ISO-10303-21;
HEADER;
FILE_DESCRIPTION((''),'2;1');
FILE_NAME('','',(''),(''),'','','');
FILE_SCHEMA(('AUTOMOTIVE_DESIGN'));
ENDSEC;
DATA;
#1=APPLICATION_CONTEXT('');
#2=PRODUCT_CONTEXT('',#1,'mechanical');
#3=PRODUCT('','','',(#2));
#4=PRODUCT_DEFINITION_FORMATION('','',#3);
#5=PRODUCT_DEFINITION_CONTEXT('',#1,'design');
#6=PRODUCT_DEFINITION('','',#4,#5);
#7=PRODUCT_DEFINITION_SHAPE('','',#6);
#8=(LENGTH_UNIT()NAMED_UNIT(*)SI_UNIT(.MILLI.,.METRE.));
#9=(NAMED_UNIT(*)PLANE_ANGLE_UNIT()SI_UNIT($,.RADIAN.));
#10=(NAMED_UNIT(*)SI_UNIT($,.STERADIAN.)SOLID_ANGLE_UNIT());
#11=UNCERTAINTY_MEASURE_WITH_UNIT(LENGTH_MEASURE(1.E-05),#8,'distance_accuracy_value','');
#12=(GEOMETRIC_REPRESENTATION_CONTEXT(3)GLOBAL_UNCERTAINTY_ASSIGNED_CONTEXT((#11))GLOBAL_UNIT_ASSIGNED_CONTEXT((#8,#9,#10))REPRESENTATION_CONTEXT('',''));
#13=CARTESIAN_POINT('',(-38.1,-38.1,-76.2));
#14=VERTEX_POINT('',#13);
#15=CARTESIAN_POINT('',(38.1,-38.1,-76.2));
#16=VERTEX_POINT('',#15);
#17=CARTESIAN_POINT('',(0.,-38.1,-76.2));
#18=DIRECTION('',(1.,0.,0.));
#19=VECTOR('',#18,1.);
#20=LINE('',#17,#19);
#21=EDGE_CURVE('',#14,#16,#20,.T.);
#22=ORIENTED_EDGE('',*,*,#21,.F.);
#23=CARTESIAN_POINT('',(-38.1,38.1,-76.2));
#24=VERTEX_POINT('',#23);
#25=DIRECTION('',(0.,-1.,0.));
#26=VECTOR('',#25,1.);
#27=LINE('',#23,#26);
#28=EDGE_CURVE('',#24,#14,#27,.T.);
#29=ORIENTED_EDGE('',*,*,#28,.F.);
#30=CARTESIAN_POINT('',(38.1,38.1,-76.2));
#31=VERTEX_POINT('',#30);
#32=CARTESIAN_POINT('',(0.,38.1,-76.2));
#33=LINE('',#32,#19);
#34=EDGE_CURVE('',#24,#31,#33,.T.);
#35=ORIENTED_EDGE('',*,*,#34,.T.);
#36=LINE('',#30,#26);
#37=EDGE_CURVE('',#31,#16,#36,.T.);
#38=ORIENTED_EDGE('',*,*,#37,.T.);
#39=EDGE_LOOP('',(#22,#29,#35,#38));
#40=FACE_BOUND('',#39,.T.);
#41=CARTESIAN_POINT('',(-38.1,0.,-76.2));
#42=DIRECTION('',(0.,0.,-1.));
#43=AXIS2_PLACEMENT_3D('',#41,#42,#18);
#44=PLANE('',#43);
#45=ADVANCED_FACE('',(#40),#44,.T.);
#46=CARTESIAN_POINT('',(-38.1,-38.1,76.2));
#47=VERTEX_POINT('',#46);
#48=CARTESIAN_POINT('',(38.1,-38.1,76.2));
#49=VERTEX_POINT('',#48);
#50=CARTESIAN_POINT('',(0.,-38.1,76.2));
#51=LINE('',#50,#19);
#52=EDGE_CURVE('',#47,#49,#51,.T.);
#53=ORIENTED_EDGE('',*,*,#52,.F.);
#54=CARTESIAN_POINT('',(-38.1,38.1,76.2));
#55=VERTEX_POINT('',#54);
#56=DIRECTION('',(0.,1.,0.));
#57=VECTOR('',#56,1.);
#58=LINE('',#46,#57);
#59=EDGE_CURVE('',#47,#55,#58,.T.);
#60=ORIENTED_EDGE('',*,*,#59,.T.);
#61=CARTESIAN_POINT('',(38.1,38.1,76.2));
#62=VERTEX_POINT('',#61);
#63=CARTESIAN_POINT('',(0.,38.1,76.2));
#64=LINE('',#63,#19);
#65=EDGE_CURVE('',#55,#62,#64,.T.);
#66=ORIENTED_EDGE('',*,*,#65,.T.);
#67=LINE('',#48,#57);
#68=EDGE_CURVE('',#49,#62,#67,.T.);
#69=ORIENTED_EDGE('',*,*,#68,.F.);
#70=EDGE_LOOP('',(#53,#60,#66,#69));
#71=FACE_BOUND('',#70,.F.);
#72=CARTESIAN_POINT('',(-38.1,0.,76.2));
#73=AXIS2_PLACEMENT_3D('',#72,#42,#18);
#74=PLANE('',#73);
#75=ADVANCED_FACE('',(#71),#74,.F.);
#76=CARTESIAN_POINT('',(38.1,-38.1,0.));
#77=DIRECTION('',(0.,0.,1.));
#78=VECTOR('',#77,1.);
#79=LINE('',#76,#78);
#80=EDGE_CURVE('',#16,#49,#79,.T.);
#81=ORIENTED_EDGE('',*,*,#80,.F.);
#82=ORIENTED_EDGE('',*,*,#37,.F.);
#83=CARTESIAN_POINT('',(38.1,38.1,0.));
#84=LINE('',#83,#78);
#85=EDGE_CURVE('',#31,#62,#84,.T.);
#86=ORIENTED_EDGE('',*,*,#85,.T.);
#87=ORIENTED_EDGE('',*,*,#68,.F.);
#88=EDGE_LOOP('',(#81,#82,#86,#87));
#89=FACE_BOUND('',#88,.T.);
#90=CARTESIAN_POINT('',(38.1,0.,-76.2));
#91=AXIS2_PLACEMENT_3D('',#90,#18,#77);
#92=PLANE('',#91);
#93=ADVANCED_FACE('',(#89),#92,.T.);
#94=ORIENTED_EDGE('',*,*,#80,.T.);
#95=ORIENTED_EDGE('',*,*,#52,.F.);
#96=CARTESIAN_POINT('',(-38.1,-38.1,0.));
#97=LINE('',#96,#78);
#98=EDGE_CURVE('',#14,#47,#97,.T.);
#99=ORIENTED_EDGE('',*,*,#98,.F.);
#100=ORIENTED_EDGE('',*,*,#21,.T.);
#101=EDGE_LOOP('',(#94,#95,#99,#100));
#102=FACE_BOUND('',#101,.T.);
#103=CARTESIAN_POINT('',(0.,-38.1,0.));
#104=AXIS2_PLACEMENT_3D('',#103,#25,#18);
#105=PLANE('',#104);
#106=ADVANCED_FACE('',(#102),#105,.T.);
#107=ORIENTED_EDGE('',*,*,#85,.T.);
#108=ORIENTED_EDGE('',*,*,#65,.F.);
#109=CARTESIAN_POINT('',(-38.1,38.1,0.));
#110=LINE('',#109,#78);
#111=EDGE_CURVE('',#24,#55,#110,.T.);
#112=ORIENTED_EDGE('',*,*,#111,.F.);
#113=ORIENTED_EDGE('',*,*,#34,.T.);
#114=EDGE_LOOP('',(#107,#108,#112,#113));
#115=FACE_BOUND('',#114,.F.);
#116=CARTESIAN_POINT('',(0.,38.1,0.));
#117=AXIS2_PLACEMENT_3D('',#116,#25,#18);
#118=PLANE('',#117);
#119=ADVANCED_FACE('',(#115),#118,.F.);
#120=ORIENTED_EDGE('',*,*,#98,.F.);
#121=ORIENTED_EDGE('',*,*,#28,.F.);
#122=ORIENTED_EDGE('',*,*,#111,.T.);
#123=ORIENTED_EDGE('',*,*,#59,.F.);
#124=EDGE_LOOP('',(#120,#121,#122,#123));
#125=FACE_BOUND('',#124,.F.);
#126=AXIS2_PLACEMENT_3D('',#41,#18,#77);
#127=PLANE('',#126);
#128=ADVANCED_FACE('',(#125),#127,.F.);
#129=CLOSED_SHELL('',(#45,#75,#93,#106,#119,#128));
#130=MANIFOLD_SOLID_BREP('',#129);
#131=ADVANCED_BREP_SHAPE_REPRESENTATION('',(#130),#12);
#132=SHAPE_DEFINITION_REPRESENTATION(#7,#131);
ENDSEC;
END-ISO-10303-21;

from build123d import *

# Parameters (mm, degrees)
F1_W     = 76.2
F1_H     = 152.4
F2_DEPTH = 38.1


# Not quite as in the source:
# - a variable given as a bare number and used for a length is read in inches; the dataset says mm whatever the document's units were


with BuildPart() as f2:
    # F1 (on Front) → F2 (new body, symmetric)
    with BuildSketch(Plane.XZ):
        Rectangle(F1_W, F1_H)
    extrude(amount=F2_DEPTH, both=True)


solid = f2.part
